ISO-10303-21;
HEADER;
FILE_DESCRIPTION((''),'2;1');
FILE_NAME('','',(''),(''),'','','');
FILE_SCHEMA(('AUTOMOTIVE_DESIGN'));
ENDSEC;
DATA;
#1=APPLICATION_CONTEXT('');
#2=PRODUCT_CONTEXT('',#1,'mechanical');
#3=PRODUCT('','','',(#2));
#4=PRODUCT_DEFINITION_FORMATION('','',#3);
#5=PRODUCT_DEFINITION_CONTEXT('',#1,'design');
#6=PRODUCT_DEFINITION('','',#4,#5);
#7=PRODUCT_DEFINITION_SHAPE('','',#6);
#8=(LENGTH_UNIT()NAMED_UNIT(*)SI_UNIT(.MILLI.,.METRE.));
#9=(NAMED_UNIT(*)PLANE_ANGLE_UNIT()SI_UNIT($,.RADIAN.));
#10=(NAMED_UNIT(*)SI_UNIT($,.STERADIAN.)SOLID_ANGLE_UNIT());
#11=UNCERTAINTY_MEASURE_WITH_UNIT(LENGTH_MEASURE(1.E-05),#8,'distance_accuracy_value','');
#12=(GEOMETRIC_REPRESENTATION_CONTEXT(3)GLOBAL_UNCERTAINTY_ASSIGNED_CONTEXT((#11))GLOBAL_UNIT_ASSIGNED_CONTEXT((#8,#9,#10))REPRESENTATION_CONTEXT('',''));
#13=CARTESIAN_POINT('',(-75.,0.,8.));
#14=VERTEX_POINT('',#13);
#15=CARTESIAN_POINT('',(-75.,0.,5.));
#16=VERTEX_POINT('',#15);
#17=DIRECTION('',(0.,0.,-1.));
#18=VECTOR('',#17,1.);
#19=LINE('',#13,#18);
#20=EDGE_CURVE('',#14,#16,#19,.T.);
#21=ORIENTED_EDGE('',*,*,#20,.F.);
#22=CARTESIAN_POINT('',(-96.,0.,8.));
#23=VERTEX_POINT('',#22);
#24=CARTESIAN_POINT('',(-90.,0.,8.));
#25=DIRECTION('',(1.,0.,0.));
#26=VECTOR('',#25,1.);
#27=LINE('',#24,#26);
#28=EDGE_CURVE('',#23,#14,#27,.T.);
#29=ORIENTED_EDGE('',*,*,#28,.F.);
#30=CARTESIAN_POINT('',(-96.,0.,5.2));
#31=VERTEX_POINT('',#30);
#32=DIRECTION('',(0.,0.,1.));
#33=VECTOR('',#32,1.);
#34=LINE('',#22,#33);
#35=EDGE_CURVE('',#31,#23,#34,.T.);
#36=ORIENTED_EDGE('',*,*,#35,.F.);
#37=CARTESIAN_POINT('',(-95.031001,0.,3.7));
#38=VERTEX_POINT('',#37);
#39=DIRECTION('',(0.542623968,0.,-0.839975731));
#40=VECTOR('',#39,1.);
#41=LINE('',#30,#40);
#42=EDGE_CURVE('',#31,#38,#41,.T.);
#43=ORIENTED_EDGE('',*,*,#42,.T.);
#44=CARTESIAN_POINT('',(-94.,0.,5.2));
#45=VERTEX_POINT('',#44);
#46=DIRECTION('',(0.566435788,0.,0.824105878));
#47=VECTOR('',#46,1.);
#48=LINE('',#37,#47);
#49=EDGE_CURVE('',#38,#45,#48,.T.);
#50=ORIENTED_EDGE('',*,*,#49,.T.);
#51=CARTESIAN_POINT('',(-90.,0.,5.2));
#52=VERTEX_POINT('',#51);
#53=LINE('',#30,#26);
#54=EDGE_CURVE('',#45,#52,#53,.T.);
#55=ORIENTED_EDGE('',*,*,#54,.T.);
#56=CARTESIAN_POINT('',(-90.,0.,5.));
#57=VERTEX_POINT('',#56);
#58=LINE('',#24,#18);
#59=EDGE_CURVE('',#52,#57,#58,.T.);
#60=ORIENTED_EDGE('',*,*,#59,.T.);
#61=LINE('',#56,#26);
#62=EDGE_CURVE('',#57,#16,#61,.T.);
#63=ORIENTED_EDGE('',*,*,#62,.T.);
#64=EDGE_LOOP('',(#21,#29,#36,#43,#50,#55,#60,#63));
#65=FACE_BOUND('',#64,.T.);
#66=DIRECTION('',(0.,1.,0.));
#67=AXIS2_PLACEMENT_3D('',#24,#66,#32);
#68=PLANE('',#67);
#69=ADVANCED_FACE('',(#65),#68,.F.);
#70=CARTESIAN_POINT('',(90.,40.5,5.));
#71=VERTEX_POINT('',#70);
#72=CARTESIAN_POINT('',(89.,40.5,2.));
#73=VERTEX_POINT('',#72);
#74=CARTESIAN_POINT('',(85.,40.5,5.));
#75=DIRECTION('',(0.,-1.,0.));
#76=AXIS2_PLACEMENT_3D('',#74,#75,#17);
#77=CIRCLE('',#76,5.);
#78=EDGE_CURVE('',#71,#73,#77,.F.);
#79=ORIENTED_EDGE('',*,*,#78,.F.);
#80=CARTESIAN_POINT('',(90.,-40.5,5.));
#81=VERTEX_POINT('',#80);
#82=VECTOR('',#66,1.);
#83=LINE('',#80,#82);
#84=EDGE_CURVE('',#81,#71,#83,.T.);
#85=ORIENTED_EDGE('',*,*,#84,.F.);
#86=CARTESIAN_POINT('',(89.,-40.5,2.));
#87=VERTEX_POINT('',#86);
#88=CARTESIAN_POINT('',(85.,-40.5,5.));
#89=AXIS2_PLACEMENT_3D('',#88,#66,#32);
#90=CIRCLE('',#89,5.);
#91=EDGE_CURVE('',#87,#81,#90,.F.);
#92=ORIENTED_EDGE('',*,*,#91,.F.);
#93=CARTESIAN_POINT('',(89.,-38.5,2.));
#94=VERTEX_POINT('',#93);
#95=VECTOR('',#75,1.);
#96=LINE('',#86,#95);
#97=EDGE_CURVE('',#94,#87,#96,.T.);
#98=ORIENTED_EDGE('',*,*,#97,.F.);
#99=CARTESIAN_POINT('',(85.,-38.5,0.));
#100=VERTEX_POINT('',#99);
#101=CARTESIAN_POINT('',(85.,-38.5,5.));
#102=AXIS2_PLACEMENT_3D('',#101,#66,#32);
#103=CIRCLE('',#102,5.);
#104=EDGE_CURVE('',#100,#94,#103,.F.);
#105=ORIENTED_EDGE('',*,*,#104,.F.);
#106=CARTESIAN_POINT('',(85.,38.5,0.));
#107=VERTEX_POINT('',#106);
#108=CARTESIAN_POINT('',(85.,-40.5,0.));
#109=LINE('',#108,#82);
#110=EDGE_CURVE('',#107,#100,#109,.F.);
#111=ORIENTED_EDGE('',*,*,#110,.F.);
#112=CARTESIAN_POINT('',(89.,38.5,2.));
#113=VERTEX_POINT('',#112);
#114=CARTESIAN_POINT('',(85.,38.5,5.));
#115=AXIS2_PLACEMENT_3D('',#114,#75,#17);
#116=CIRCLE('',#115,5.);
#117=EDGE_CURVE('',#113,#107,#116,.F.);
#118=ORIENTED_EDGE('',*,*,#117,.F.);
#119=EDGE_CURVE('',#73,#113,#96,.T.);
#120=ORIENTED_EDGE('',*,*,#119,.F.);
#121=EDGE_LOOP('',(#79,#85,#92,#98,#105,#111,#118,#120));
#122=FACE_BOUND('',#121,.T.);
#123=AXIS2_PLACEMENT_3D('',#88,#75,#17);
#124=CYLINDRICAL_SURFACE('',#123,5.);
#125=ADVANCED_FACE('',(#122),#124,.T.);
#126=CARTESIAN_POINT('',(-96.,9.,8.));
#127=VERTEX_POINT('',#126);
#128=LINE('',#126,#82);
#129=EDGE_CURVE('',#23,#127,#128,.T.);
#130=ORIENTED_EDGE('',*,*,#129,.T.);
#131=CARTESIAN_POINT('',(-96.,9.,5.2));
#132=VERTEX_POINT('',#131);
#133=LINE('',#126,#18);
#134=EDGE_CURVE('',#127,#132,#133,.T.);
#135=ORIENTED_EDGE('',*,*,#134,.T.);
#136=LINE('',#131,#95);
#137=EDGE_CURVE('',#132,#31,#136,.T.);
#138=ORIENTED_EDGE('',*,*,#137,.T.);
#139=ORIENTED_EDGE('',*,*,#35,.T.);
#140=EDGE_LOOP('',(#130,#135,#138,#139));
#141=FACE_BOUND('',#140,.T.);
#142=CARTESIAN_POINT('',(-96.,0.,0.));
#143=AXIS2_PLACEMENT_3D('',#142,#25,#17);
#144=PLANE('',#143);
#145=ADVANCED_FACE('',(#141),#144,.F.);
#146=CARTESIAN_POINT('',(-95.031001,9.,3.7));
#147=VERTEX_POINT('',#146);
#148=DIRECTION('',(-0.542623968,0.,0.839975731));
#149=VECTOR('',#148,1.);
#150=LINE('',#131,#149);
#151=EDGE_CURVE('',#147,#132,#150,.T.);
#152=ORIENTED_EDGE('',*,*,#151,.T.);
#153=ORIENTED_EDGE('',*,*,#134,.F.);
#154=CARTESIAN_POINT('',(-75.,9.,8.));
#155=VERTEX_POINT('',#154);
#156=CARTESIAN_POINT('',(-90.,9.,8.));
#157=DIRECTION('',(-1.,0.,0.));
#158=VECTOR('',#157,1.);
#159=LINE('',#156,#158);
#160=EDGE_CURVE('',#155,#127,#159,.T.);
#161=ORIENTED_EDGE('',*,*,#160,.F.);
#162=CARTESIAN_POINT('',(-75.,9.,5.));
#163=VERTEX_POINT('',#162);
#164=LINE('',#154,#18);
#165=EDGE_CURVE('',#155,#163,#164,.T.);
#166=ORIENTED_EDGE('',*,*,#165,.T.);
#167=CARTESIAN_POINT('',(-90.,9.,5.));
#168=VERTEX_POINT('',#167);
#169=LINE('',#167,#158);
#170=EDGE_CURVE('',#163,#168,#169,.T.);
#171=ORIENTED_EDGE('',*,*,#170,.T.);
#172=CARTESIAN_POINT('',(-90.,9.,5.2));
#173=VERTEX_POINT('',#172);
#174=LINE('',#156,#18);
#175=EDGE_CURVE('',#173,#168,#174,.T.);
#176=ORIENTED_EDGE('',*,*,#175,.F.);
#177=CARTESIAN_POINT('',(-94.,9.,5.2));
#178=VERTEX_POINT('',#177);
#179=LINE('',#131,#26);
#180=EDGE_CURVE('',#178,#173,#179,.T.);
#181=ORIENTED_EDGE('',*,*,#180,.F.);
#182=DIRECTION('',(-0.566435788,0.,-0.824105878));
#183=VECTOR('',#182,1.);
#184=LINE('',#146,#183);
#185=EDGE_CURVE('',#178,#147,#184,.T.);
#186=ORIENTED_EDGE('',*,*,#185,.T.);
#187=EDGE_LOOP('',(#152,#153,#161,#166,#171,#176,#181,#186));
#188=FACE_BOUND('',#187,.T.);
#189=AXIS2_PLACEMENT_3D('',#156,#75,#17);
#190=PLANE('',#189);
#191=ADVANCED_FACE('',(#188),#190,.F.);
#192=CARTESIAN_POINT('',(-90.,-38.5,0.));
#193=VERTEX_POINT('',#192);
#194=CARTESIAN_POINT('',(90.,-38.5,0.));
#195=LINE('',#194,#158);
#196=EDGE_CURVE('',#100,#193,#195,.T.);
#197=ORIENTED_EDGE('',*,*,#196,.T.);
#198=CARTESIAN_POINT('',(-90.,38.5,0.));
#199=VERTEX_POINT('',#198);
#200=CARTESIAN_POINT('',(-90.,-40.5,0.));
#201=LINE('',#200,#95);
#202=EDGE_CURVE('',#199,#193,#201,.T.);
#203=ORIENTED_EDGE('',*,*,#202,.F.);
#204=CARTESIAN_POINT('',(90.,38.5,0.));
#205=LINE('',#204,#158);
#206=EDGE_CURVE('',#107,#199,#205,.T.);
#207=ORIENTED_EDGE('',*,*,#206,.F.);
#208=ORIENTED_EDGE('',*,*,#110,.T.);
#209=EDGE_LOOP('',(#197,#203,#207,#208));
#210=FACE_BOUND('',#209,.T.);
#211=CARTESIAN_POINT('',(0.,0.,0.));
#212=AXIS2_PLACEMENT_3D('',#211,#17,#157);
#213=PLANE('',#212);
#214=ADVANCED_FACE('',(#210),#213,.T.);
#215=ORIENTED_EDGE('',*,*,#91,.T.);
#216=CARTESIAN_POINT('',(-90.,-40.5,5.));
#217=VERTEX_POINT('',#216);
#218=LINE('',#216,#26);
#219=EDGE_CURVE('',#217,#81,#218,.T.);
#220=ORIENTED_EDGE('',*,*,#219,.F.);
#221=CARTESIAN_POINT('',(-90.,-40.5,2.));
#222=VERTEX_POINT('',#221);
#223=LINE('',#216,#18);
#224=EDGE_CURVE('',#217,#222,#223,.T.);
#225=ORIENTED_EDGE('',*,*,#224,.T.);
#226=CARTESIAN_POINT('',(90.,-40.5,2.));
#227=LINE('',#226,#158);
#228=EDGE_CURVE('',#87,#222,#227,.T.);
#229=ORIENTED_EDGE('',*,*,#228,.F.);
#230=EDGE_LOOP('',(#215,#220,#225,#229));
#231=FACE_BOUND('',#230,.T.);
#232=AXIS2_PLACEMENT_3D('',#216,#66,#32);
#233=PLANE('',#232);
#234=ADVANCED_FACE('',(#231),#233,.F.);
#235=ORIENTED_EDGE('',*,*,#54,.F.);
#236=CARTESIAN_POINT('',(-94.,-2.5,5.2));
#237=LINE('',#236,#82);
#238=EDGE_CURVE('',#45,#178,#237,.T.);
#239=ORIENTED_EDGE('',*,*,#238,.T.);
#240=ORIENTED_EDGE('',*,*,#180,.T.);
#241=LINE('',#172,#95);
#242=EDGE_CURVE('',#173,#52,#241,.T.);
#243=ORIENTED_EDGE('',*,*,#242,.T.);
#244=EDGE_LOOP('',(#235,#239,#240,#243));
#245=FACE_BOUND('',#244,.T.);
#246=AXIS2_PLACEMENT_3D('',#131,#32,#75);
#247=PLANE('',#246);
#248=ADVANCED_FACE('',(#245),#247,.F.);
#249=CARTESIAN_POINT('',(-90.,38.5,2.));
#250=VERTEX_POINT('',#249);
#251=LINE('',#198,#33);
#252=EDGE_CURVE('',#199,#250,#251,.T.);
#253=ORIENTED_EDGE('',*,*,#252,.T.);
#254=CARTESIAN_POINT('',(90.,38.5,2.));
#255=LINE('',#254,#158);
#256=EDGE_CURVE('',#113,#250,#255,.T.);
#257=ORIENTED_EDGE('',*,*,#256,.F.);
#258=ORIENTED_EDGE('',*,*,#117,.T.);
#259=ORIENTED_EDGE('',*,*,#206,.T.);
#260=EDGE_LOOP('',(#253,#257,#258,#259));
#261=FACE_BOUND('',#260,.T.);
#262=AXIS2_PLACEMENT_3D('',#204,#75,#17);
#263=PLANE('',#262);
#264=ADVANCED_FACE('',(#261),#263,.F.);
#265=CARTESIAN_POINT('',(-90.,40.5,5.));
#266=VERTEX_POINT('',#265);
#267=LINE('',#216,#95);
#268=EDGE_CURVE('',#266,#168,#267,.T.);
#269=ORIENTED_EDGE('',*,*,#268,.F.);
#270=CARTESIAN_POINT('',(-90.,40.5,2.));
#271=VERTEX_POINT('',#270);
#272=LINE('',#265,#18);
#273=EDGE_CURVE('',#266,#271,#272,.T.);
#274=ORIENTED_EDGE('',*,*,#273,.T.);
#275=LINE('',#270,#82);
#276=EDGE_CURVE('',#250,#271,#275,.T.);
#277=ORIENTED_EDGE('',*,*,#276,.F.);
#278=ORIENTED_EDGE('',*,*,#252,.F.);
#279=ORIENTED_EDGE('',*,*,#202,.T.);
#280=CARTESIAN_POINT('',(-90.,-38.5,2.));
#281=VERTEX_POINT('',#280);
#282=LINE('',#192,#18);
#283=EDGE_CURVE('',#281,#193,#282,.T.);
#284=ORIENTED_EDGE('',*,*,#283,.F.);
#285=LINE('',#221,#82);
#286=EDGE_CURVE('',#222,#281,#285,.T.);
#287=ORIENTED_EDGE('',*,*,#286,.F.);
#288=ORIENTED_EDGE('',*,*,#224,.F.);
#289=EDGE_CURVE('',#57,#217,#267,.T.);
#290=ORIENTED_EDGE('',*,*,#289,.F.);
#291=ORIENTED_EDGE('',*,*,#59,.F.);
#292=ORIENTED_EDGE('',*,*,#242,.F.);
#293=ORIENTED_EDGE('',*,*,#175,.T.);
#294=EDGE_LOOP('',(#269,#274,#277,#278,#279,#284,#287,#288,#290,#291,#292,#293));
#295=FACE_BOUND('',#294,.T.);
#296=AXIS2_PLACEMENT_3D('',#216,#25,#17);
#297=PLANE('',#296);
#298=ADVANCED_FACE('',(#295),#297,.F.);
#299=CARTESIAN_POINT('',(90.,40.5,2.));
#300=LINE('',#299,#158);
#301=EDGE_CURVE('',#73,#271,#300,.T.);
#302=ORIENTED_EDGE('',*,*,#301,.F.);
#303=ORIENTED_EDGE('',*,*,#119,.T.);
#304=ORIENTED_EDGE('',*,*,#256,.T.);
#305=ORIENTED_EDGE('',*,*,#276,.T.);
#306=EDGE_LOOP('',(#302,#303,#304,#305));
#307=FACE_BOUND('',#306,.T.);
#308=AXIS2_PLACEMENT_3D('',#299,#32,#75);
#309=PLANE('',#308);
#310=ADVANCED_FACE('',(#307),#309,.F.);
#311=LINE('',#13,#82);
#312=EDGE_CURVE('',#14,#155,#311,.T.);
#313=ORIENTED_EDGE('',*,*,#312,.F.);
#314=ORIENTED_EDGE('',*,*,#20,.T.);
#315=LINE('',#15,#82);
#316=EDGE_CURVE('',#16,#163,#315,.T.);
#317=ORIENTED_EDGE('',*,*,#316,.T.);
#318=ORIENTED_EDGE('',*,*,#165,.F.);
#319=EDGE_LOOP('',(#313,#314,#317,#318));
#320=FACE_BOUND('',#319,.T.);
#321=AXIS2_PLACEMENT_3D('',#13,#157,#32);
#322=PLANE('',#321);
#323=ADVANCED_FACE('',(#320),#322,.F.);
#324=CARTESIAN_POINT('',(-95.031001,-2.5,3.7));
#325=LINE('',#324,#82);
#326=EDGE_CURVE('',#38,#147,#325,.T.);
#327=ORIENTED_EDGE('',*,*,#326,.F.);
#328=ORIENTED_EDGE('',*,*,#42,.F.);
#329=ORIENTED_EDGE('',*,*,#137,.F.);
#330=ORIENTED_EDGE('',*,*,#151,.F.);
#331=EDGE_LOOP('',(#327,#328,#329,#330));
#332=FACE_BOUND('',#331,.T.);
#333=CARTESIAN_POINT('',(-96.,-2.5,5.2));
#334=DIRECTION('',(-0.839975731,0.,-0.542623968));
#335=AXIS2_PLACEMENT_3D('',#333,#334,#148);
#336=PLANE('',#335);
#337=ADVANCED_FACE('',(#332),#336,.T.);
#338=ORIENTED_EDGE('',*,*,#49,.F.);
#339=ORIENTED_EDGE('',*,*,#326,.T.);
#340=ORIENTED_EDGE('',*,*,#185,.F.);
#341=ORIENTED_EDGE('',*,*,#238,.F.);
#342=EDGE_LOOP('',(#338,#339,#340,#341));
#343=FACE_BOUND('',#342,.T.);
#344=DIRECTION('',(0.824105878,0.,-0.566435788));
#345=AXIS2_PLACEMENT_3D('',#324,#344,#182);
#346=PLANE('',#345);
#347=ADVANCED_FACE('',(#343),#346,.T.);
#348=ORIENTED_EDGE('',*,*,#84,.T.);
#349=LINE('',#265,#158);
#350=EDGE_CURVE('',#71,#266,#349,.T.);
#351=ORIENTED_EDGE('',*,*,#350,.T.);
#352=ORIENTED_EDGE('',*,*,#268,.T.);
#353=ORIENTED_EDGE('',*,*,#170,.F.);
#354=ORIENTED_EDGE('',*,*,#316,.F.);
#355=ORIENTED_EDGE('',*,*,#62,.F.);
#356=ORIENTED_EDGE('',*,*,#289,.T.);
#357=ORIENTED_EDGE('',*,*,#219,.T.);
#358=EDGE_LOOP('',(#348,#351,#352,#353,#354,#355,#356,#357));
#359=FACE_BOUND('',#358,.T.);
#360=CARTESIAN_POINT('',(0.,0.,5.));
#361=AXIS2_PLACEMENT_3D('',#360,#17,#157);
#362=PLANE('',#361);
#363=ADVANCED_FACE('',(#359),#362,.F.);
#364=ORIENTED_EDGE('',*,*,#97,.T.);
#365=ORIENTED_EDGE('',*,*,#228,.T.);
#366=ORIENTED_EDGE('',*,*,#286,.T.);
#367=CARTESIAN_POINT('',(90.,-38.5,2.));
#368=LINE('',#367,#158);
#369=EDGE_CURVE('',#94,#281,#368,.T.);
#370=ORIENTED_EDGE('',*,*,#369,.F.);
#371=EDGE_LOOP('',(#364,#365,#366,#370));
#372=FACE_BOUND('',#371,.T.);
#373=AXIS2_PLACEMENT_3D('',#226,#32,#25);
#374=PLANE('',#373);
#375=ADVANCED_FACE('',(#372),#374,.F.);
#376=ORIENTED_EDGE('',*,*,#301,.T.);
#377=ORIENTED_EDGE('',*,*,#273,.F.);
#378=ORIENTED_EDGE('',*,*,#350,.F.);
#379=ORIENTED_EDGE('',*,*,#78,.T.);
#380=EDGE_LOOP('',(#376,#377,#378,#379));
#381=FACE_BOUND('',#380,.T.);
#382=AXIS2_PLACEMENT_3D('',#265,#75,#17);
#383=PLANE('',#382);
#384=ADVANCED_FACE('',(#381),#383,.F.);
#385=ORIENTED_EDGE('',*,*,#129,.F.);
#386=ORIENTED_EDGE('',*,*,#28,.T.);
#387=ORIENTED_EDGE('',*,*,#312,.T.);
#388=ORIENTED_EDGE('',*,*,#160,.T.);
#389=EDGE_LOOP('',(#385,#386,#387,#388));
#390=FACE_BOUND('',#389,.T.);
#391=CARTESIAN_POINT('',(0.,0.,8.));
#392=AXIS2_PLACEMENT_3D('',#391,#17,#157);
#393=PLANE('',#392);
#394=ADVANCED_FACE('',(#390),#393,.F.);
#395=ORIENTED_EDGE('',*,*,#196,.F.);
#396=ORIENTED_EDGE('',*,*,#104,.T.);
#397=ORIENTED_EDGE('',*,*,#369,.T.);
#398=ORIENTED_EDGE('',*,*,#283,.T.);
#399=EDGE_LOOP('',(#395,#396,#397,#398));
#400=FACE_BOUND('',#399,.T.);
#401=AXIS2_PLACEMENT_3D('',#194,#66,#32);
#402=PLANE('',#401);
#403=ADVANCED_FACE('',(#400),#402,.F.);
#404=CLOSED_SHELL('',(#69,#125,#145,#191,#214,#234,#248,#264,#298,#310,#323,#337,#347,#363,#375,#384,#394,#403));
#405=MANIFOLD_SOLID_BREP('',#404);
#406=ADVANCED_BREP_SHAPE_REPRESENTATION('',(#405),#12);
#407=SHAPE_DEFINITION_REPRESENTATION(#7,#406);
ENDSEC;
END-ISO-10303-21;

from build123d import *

# Parameters (mm, degrees)
SKETCH1_W           = 180
SKETCH1_H           = 81
BOSS_EXTRUDE1_DEPTH = 5
FILLET1_R           = 5
SKETCH2_W           = 2
SKETCH2_H           = 2
CUT_EXTRUDE1_DEPTH  = 185.567738243
SKETCH3_W           = 15
SKETCH3_H           = 9
BOSS_EXTRUDE2_DEPTH = 3
SKETCH4_W           = 2.8
SKETCH4_H           = 9
BOSS_EXTRUDE3_DEPTH = 6
BOSS_EXTRUDE4_DEPTH = 9


with BuildPart() as part:
    # Sketch1 → Boss-Extrude1 (new body)
    with BuildSketch(Plane.XY):
        Rectangle(SKETCH1_W, SKETCH1_H)
    extrude(amount=BOSS_EXTRUDE1_DEPTH)

    # Fillet1
    fillet1_edges = [part.edges().sort_by_distance(p)[0] for p in [
        (90, 0, 0),
    ]]
    fillet(fillet1_edges, radius=FILLET1_R - 0.0001)  # a hair under: the kernel refuses the full size

    # Sketch2 → Cut-Extrude1 (cut, through all)
    with BuildSketch(Plane.ZY.offset(90)):
        with Locations((1, 39.5)):
            Rectangle(SKETCH2_W, SKETCH2_H)
        with Locations((1, -39.5)):
            Rectangle(SKETCH2_W, SKETCH2_H)
    extrude(amount=-CUT_EXTRUDE1_DEPTH, mode=Mode.SUBTRACT)

    # Sketch3 → Boss-Extrude2 (add)
    with BuildSketch(Plane.XY.offset(5)):
        with Locations((-82.5, 4.5)):
            Rectangle(SKETCH3_W, SKETCH3_H)
    extrude(amount=BOSS_EXTRUDE2_DEPTH)

    # Sketch4 → Boss-Extrude3 (add)
    with BuildSketch(Plane.ZY.offset(90)):
        with Locations((6.6, 4.5)):
            Rectangle(SKETCH4_W, SKETCH4_H)
    extrude(amount=BOSS_EXTRUDE3_DEPTH)

    # Sketch5 → Boss-Extrude4 (add)
    with BuildSketch(Plane(origin=(0, 9, 0), x_dir=(1, 0, 0), z_dir=(0, 1, 0))):
        Polygon((-96, -5.2), (-95.031000632, -3.7), (-94, -5.2), align=None)
    extrude(amount=-BOSS_EXTRUDE4_DEPTH)


solid = part.part
